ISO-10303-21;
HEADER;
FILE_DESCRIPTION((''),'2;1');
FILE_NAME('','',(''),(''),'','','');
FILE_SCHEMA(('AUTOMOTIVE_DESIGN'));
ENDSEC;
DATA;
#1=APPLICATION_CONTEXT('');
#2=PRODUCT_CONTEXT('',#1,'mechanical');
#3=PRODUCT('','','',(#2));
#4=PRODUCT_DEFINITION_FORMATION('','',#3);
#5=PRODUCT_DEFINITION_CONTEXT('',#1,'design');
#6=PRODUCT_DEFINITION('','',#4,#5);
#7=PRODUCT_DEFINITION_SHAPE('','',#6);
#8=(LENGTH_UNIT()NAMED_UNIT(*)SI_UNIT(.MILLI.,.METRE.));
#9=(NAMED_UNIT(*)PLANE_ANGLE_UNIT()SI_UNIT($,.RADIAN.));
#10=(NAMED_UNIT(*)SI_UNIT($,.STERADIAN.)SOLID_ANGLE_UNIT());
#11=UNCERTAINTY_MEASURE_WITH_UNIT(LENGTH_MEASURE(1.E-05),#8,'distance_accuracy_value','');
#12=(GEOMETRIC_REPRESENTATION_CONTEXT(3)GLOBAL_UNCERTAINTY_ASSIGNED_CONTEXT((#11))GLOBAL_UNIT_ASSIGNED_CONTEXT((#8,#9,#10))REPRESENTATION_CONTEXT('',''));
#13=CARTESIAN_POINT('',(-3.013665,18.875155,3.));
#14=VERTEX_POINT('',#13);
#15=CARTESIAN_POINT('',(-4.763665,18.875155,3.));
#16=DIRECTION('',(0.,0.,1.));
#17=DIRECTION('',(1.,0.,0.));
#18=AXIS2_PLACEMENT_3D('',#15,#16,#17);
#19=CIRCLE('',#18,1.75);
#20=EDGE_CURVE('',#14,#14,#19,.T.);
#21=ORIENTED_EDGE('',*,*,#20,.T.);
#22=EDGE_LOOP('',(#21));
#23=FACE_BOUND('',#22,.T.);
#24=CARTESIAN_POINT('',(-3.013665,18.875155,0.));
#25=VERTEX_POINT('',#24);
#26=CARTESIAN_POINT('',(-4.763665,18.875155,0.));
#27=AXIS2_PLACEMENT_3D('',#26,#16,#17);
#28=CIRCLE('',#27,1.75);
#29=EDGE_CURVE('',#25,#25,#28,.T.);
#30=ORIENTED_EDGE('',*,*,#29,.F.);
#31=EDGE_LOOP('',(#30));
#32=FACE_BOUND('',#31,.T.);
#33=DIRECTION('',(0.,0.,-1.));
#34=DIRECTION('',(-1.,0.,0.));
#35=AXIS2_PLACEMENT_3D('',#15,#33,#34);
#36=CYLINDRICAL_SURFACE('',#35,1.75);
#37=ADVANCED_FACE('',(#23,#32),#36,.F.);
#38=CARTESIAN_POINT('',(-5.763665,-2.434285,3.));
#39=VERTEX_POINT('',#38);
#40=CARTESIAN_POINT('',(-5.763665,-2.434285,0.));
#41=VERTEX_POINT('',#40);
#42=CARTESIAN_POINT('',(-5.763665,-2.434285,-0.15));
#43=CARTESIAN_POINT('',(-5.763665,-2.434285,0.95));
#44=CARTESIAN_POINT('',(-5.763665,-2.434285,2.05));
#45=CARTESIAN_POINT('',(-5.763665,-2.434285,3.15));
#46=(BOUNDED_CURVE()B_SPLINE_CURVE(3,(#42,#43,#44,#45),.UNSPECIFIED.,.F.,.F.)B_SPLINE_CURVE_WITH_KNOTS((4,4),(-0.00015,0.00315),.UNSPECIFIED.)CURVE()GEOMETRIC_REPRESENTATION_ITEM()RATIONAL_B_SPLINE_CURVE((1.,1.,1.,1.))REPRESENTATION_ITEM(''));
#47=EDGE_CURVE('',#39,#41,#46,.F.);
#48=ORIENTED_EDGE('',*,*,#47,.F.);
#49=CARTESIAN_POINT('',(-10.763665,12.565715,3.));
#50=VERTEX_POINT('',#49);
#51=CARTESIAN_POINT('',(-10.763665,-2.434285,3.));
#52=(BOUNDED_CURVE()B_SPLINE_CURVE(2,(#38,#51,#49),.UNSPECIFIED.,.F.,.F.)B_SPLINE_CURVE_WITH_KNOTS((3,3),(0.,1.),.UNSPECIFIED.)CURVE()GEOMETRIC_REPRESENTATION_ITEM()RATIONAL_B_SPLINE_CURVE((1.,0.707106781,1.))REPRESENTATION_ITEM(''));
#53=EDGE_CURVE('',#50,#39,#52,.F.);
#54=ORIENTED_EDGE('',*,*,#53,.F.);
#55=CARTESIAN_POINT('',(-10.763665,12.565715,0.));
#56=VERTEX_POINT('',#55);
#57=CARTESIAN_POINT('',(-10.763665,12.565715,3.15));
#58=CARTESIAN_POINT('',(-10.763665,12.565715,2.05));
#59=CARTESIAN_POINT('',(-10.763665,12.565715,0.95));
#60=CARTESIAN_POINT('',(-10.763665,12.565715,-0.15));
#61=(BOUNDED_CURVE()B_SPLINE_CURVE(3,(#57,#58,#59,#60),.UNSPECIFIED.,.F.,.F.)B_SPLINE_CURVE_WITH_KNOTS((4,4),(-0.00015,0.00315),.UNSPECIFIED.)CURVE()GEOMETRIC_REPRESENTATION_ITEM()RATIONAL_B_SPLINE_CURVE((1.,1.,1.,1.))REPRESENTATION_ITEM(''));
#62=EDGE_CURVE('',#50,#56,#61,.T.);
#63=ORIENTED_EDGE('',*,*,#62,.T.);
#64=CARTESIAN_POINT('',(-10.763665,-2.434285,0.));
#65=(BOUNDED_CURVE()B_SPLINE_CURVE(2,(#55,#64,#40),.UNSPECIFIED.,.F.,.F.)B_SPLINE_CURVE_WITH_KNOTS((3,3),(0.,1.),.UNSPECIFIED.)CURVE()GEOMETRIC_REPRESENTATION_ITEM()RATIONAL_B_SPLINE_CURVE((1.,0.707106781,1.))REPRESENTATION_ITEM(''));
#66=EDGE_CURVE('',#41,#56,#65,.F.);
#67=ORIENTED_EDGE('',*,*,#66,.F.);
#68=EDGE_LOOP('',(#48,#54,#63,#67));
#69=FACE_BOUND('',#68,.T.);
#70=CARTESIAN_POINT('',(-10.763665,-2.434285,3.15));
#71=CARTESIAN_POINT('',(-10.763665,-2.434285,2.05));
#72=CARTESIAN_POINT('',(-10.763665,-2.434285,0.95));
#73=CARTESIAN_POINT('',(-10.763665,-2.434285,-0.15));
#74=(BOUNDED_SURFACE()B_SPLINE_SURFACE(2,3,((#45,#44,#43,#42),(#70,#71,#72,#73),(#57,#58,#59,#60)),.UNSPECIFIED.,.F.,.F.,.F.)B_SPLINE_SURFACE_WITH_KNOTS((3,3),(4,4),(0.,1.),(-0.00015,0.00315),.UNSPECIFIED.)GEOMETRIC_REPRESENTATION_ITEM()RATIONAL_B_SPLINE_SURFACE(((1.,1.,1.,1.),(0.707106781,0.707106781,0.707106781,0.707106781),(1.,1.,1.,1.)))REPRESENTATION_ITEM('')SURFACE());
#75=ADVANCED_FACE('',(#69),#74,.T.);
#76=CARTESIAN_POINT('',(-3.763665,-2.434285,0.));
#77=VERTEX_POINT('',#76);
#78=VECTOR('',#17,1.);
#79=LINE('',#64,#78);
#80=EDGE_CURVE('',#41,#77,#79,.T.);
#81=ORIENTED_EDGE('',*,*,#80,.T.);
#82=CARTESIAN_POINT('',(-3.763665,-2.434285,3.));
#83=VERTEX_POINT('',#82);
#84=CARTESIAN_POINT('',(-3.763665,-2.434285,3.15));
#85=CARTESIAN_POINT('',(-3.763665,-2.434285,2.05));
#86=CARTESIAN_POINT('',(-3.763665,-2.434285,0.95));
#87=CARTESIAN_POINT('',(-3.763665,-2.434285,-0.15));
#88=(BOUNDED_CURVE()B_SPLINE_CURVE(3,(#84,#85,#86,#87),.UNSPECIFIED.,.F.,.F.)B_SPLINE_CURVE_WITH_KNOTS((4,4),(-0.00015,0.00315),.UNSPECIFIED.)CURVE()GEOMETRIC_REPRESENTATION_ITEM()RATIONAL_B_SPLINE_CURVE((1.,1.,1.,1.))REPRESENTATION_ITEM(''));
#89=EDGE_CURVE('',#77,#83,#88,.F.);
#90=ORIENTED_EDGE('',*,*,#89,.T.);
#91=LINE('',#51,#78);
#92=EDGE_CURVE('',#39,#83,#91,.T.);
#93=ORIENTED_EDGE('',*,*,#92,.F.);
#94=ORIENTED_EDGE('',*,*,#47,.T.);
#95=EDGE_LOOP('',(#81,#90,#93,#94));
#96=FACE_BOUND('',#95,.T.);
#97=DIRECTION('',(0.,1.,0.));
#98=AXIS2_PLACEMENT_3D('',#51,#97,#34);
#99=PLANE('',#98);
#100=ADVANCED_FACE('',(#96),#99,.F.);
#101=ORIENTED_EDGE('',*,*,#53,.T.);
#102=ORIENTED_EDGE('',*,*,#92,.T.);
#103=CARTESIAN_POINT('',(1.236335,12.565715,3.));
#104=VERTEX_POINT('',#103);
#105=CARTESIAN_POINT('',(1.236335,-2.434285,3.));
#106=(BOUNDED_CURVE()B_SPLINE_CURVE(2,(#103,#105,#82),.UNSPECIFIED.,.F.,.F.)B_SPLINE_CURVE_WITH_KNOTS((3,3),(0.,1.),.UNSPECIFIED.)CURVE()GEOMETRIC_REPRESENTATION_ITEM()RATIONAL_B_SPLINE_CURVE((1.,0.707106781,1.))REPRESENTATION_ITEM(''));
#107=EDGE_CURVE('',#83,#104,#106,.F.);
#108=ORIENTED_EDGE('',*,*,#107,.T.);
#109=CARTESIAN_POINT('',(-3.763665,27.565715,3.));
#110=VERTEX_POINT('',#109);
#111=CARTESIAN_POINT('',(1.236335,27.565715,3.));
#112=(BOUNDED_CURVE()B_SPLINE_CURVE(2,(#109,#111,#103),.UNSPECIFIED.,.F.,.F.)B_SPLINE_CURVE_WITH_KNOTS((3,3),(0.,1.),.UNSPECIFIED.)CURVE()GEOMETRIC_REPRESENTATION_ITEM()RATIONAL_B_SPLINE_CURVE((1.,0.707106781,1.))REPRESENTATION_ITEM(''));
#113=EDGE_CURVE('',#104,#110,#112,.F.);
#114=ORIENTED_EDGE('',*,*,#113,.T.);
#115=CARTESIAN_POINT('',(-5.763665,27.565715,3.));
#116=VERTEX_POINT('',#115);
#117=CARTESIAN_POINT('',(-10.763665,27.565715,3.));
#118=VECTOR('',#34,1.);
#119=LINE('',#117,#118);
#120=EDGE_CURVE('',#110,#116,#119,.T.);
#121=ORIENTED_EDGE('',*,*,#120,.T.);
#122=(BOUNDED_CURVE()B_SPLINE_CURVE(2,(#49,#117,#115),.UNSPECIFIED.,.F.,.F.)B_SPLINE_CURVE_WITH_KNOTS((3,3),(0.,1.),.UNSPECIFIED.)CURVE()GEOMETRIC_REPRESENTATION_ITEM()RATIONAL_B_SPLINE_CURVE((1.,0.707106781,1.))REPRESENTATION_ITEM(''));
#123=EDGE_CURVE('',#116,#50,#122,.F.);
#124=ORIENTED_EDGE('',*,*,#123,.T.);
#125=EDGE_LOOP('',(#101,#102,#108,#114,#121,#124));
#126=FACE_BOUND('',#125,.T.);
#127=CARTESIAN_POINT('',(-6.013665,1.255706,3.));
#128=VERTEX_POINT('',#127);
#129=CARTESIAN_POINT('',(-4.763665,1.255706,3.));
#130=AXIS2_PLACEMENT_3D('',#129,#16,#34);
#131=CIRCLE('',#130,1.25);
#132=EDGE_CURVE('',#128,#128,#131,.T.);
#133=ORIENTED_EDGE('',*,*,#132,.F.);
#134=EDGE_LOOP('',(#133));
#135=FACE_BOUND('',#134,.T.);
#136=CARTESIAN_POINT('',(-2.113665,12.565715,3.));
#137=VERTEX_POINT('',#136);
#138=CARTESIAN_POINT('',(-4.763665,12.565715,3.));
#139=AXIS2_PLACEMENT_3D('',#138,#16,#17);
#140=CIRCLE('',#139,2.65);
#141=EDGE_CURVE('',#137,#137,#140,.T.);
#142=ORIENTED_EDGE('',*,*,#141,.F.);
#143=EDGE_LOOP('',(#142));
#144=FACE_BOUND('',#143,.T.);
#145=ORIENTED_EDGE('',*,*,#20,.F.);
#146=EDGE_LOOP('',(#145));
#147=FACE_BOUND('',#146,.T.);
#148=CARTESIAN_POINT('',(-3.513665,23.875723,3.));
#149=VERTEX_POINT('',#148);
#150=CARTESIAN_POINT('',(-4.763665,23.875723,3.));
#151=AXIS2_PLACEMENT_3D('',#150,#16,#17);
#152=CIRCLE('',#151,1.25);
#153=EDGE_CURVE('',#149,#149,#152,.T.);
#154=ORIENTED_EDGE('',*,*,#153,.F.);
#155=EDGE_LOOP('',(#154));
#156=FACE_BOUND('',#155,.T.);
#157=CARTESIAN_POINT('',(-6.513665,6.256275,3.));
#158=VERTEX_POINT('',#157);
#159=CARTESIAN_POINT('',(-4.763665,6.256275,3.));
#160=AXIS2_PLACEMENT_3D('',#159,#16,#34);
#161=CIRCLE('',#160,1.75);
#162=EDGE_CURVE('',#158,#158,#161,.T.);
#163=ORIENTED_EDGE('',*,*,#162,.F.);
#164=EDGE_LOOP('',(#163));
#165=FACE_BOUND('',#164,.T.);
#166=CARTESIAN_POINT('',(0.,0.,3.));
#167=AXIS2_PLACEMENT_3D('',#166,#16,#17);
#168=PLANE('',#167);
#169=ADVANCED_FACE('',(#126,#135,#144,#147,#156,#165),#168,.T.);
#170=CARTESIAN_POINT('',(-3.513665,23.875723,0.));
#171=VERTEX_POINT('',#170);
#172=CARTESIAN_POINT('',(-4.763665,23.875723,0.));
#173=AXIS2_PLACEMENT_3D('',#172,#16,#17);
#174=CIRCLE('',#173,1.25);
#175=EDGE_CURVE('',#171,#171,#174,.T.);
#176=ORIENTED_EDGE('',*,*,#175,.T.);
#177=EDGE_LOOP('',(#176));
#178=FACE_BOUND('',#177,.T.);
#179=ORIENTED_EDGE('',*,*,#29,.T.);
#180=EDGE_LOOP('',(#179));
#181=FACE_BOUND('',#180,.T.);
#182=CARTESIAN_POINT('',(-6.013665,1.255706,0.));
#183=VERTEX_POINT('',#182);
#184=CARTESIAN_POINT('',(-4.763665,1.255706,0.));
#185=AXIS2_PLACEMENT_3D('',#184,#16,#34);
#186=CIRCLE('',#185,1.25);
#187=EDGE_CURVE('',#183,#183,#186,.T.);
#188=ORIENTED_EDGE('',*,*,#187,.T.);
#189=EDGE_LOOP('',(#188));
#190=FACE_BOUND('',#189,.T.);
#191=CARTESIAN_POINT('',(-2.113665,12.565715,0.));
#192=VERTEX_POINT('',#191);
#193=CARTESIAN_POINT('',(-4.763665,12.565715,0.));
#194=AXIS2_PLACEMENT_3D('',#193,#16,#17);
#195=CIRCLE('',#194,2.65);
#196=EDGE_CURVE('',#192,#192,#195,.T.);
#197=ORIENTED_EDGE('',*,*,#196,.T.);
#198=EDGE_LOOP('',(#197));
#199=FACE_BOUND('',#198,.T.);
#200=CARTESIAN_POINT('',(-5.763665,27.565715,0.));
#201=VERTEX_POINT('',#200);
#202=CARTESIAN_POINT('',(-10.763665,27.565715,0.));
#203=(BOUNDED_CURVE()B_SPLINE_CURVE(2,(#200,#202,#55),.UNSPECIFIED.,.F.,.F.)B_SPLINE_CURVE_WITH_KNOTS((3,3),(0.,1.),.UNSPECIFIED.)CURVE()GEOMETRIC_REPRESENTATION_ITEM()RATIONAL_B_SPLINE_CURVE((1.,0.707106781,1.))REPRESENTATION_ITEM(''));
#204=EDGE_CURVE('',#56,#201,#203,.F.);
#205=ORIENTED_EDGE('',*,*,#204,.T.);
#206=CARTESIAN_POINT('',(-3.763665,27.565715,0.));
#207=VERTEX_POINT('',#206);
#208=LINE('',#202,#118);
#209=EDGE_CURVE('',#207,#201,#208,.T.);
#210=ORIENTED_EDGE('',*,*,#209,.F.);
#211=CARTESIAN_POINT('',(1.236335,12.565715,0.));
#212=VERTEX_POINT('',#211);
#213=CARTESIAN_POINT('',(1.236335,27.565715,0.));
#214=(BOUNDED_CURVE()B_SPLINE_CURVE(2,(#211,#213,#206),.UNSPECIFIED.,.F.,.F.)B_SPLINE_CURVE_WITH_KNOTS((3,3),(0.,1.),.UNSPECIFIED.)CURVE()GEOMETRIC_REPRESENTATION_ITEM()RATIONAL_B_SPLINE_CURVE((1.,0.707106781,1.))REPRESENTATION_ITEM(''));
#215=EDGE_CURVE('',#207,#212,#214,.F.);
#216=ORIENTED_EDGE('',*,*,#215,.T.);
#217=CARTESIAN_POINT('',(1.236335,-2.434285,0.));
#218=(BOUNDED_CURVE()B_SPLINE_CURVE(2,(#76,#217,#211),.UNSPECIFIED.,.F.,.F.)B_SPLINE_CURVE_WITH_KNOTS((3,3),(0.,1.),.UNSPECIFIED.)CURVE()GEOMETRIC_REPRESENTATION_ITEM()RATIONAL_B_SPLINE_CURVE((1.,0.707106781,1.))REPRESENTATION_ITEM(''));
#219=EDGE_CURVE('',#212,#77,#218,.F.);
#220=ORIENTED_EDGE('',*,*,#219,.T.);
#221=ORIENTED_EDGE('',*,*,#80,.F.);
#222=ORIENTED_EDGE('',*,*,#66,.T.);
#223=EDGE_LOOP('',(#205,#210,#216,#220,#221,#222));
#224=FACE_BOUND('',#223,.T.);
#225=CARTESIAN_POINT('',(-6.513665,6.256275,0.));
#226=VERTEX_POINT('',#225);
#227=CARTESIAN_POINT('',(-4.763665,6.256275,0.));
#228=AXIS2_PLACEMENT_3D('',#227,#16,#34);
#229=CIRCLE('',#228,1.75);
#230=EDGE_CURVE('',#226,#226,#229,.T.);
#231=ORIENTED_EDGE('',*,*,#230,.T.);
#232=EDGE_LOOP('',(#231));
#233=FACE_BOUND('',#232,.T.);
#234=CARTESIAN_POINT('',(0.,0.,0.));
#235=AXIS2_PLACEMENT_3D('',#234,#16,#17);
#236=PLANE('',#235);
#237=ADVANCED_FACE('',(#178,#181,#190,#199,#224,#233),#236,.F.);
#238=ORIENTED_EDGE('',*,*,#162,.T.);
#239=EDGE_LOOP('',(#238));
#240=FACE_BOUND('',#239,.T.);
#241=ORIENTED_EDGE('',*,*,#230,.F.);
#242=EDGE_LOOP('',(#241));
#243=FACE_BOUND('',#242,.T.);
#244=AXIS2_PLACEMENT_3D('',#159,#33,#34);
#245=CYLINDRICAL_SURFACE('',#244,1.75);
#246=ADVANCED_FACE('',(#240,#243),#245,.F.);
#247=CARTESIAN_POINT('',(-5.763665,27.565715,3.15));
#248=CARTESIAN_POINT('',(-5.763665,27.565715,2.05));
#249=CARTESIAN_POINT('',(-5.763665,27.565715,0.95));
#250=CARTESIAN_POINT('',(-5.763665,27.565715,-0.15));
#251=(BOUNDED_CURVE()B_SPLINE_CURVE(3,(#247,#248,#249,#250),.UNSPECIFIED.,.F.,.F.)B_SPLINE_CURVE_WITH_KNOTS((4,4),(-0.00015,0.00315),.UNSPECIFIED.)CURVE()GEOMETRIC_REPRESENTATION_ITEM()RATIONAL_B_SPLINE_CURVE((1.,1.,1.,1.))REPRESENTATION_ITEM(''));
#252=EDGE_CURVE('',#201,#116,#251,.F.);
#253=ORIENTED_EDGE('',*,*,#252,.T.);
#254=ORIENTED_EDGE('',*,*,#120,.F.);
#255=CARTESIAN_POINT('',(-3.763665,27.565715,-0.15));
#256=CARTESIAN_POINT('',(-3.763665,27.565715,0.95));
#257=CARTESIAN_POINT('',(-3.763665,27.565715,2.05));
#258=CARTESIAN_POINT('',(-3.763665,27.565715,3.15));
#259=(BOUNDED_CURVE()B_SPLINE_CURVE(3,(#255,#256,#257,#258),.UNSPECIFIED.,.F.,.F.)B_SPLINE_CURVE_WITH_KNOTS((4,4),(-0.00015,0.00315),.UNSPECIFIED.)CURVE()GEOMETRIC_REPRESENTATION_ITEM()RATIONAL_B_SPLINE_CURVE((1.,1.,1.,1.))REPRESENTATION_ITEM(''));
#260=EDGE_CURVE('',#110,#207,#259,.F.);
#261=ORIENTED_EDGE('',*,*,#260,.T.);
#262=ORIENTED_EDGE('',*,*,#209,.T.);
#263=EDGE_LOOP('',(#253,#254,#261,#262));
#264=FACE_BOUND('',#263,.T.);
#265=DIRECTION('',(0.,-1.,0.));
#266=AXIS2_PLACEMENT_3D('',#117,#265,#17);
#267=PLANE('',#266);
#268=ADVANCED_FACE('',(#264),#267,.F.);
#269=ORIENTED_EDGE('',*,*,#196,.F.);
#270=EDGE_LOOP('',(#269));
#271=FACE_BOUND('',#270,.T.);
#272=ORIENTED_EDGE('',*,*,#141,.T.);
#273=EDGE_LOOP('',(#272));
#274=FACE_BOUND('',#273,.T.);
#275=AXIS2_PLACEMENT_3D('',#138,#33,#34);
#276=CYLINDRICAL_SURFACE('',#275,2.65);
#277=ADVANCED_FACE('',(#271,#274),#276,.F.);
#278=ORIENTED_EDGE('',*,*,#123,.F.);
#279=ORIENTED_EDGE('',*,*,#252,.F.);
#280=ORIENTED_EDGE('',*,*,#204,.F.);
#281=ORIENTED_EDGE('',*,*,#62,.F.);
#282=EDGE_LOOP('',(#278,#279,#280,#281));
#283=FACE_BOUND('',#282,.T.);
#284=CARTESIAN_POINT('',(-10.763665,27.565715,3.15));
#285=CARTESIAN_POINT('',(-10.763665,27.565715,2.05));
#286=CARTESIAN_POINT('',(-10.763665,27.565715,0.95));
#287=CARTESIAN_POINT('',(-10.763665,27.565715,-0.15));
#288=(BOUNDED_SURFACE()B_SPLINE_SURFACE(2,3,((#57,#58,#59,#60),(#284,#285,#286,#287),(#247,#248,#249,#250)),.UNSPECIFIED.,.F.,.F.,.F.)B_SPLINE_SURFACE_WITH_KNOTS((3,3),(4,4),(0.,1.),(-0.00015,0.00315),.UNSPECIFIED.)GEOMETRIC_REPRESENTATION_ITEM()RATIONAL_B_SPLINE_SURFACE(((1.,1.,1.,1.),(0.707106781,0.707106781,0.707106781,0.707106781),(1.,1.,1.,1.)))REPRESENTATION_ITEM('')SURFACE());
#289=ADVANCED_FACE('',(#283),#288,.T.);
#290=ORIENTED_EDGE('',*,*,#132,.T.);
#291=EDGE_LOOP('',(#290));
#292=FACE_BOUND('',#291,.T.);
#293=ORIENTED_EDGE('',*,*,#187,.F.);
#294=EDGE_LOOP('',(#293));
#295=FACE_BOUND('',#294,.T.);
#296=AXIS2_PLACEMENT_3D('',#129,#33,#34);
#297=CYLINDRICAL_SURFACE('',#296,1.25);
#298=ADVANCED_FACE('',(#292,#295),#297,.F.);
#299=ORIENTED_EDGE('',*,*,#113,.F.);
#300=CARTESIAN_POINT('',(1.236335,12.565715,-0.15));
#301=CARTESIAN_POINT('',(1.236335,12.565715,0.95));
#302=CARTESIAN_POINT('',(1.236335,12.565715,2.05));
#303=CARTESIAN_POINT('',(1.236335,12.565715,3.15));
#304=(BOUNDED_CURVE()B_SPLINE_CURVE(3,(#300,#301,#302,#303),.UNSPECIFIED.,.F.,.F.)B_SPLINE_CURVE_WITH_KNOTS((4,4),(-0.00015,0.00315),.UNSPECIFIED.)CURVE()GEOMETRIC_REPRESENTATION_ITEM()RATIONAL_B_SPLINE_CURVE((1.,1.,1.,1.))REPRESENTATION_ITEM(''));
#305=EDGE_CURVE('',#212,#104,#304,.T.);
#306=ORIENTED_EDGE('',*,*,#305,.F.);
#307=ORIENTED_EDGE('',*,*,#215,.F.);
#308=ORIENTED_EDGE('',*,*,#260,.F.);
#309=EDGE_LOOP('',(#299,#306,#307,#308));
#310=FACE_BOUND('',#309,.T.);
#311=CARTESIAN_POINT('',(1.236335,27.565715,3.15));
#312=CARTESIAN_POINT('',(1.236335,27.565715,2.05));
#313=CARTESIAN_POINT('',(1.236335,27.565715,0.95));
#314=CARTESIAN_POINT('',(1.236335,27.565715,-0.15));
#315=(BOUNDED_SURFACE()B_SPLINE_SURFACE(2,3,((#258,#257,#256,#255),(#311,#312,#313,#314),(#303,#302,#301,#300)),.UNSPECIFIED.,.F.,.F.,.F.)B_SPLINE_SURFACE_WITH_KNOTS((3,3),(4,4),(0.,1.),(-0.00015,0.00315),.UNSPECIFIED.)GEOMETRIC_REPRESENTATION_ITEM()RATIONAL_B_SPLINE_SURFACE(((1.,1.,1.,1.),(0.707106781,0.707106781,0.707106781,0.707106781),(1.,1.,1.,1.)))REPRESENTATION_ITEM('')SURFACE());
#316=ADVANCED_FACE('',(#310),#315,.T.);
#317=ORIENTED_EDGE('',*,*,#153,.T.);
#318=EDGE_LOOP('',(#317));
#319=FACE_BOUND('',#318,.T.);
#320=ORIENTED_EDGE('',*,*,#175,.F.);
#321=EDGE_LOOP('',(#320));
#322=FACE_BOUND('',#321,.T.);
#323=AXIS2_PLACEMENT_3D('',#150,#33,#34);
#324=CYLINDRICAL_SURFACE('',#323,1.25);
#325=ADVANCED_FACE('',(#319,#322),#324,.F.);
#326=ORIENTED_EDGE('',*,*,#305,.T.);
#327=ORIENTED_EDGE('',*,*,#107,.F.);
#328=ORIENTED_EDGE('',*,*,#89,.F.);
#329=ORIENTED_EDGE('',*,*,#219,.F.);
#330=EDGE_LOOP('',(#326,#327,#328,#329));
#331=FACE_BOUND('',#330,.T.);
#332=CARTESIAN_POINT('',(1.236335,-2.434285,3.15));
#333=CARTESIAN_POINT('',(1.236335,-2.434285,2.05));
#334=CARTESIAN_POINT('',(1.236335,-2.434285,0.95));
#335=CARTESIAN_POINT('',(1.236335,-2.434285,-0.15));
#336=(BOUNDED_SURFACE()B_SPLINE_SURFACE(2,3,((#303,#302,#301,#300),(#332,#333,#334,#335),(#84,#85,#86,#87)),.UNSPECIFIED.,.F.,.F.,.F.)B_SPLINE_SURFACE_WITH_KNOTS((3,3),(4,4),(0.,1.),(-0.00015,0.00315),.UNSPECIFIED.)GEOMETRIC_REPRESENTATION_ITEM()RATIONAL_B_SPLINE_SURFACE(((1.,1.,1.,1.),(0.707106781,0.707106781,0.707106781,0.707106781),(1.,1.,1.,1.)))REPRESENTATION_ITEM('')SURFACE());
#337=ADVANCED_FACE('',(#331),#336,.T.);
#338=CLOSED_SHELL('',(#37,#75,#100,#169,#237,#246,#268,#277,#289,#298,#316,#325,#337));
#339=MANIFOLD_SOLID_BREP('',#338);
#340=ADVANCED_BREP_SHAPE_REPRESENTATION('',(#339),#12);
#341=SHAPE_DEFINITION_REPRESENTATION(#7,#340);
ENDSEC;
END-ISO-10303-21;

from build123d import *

# Parameters (mm, degrees)
SKETCH_1_W      = 12
SKETCH_1_H      = 30
SKETCH_1_R      = 2.65
SKETCH_1_R_2    = 1.25
SKETCH_1_R_3    = 1.75
EXTRUDE_1_DEPTH = 3
FILLET_1_SIZE   = 5
FILLET_1_SIZE_2 = 15
FILLET_2_SIZE   = 5
FILLET_2_SIZE_2 = 15
FILLET_3_SIZE   = 15
FILLET_3_SIZE_2 = 5
FILLET_4_SIZE   = 5
FILLET_4_SIZE_2 = 15


with BuildPart() as part:
    # 草图1 → 凸台-拉伸1 (new body)
    with BuildSketch(Plane.XY):
        with Locations((-4.763664969, 12.565714772)):
            Rectangle(SKETCH_1_W, SKETCH_1_H)
        with Locations((-4.763664969, 12.565714772)):
            Circle(SKETCH_1_R, mode=Mode.SUBTRACT)
        with Locations((-4.763664969, 23.875723392)):
            Circle(SKETCH_1_R_2, mode=Mode.SUBTRACT)
        with Locations((-4.763664969, 18.875154811)):
            Circle(SKETCH_1_R_3, mode=Mode.SUBTRACT)
        with Locations(Location((-4.763664969, 1.255706152, 0), (0, 0, 180))):
            Circle(SKETCH_1_R_2, mode=Mode.SUBTRACT)
        with Locations(Location((-4.763664969, 6.256274734, 0), (0, 0, 180))):
            Circle(SKETCH_1_R_3, mode=Mode.SUBTRACT)
    extrude(amount=EXTRUDE_1_DEPTH)

    # 圆角1
    # an asymmetric fillet: 15, 5 mm, written as the material it takes off along each edge
    with BuildSketch(Plane(origin=(-10.763664969, 27.565714772, -37.5), x_dir=(1, 0, 0), z_dir=(0, 0, 1))) as fillet_1_piece_1:
        with BuildLine():
            Bezier((FILLET_1_SIZE, 0), (0, 0), (0, -FILLET_1_SIZE_2), weights=[1, 0.707106781, 1])
            Line((0, -FILLET_1_SIZE_2), (0, 0))
            Line((0, 0), (FILLET_1_SIZE, 0))
        make_face()
    extrude(amount=78, mode=Mode.SUBTRACT)

    # 圆角2
    # an asymmetric fillet: 15, 5 mm, written as the material it takes off along each edge
    with BuildSketch(Plane(origin=(1.236335031, 27.565714772, -37.5), x_dir=(-1, 0, 0), z_dir=(0, 0, 1))) as fillet_2_piece_1:
        with BuildLine():
            Bezier((FILLET_2_SIZE, 0), (0, 0), (0, FILLET_2_SIZE_2), weights=[1, 0.707106781, 1])
            Line((0, FILLET_2_SIZE_2), (0, 0))
            Line((0, 0), (FILLET_2_SIZE, 0))
        make_face()
    extrude(amount=78, mode=Mode.SUBTRACT)

    # 圆角3
    # an asymmetric fillet: 15, 5 mm, written as the material it takes off along each edge
    with BuildSketch(Plane(origin=(-10.763664969, -2.434285228, -37.5), x_dir=(0, 1, 0), z_dir=(0, 0, 1))) as fillet_3_piece_1:
        with BuildLine():
            Bezier((FILLET_3_SIZE, 0), (0, 0), (0, -FILLET_3_SIZE_2), weights=[1, 0.707106781, 1])
            Line((0, -FILLET_3_SIZE_2), (0, 0))
            Line((0, 0), (FILLET_3_SIZE, 0))
        make_face()
    extrude(amount=78, mode=Mode.SUBTRACT)

    # 圆角4
    # an asymmetric fillet: 15, 5 mm, written as the material it takes off along each edge
    with BuildSketch(Plane(origin=(1.236335031, -2.434285228, -37.5), x_dir=(-1, 0, 0), z_dir=(0, 0, 1))) as fillet_4_piece_1:
        with BuildLine():
            Bezier((FILLET_4_SIZE, 0), (0, 0), (0, -FILLET_4_SIZE_2), weights=[1, 0.707106781, 1])
            Line((0, -FILLET_4_SIZE_2), (0, 0))
            Line((0, 0), (FILLET_4_SIZE, 0))
        make_face()
    extrude(amount=78, mode=Mode.SUBTRACT)


solid = part.part
